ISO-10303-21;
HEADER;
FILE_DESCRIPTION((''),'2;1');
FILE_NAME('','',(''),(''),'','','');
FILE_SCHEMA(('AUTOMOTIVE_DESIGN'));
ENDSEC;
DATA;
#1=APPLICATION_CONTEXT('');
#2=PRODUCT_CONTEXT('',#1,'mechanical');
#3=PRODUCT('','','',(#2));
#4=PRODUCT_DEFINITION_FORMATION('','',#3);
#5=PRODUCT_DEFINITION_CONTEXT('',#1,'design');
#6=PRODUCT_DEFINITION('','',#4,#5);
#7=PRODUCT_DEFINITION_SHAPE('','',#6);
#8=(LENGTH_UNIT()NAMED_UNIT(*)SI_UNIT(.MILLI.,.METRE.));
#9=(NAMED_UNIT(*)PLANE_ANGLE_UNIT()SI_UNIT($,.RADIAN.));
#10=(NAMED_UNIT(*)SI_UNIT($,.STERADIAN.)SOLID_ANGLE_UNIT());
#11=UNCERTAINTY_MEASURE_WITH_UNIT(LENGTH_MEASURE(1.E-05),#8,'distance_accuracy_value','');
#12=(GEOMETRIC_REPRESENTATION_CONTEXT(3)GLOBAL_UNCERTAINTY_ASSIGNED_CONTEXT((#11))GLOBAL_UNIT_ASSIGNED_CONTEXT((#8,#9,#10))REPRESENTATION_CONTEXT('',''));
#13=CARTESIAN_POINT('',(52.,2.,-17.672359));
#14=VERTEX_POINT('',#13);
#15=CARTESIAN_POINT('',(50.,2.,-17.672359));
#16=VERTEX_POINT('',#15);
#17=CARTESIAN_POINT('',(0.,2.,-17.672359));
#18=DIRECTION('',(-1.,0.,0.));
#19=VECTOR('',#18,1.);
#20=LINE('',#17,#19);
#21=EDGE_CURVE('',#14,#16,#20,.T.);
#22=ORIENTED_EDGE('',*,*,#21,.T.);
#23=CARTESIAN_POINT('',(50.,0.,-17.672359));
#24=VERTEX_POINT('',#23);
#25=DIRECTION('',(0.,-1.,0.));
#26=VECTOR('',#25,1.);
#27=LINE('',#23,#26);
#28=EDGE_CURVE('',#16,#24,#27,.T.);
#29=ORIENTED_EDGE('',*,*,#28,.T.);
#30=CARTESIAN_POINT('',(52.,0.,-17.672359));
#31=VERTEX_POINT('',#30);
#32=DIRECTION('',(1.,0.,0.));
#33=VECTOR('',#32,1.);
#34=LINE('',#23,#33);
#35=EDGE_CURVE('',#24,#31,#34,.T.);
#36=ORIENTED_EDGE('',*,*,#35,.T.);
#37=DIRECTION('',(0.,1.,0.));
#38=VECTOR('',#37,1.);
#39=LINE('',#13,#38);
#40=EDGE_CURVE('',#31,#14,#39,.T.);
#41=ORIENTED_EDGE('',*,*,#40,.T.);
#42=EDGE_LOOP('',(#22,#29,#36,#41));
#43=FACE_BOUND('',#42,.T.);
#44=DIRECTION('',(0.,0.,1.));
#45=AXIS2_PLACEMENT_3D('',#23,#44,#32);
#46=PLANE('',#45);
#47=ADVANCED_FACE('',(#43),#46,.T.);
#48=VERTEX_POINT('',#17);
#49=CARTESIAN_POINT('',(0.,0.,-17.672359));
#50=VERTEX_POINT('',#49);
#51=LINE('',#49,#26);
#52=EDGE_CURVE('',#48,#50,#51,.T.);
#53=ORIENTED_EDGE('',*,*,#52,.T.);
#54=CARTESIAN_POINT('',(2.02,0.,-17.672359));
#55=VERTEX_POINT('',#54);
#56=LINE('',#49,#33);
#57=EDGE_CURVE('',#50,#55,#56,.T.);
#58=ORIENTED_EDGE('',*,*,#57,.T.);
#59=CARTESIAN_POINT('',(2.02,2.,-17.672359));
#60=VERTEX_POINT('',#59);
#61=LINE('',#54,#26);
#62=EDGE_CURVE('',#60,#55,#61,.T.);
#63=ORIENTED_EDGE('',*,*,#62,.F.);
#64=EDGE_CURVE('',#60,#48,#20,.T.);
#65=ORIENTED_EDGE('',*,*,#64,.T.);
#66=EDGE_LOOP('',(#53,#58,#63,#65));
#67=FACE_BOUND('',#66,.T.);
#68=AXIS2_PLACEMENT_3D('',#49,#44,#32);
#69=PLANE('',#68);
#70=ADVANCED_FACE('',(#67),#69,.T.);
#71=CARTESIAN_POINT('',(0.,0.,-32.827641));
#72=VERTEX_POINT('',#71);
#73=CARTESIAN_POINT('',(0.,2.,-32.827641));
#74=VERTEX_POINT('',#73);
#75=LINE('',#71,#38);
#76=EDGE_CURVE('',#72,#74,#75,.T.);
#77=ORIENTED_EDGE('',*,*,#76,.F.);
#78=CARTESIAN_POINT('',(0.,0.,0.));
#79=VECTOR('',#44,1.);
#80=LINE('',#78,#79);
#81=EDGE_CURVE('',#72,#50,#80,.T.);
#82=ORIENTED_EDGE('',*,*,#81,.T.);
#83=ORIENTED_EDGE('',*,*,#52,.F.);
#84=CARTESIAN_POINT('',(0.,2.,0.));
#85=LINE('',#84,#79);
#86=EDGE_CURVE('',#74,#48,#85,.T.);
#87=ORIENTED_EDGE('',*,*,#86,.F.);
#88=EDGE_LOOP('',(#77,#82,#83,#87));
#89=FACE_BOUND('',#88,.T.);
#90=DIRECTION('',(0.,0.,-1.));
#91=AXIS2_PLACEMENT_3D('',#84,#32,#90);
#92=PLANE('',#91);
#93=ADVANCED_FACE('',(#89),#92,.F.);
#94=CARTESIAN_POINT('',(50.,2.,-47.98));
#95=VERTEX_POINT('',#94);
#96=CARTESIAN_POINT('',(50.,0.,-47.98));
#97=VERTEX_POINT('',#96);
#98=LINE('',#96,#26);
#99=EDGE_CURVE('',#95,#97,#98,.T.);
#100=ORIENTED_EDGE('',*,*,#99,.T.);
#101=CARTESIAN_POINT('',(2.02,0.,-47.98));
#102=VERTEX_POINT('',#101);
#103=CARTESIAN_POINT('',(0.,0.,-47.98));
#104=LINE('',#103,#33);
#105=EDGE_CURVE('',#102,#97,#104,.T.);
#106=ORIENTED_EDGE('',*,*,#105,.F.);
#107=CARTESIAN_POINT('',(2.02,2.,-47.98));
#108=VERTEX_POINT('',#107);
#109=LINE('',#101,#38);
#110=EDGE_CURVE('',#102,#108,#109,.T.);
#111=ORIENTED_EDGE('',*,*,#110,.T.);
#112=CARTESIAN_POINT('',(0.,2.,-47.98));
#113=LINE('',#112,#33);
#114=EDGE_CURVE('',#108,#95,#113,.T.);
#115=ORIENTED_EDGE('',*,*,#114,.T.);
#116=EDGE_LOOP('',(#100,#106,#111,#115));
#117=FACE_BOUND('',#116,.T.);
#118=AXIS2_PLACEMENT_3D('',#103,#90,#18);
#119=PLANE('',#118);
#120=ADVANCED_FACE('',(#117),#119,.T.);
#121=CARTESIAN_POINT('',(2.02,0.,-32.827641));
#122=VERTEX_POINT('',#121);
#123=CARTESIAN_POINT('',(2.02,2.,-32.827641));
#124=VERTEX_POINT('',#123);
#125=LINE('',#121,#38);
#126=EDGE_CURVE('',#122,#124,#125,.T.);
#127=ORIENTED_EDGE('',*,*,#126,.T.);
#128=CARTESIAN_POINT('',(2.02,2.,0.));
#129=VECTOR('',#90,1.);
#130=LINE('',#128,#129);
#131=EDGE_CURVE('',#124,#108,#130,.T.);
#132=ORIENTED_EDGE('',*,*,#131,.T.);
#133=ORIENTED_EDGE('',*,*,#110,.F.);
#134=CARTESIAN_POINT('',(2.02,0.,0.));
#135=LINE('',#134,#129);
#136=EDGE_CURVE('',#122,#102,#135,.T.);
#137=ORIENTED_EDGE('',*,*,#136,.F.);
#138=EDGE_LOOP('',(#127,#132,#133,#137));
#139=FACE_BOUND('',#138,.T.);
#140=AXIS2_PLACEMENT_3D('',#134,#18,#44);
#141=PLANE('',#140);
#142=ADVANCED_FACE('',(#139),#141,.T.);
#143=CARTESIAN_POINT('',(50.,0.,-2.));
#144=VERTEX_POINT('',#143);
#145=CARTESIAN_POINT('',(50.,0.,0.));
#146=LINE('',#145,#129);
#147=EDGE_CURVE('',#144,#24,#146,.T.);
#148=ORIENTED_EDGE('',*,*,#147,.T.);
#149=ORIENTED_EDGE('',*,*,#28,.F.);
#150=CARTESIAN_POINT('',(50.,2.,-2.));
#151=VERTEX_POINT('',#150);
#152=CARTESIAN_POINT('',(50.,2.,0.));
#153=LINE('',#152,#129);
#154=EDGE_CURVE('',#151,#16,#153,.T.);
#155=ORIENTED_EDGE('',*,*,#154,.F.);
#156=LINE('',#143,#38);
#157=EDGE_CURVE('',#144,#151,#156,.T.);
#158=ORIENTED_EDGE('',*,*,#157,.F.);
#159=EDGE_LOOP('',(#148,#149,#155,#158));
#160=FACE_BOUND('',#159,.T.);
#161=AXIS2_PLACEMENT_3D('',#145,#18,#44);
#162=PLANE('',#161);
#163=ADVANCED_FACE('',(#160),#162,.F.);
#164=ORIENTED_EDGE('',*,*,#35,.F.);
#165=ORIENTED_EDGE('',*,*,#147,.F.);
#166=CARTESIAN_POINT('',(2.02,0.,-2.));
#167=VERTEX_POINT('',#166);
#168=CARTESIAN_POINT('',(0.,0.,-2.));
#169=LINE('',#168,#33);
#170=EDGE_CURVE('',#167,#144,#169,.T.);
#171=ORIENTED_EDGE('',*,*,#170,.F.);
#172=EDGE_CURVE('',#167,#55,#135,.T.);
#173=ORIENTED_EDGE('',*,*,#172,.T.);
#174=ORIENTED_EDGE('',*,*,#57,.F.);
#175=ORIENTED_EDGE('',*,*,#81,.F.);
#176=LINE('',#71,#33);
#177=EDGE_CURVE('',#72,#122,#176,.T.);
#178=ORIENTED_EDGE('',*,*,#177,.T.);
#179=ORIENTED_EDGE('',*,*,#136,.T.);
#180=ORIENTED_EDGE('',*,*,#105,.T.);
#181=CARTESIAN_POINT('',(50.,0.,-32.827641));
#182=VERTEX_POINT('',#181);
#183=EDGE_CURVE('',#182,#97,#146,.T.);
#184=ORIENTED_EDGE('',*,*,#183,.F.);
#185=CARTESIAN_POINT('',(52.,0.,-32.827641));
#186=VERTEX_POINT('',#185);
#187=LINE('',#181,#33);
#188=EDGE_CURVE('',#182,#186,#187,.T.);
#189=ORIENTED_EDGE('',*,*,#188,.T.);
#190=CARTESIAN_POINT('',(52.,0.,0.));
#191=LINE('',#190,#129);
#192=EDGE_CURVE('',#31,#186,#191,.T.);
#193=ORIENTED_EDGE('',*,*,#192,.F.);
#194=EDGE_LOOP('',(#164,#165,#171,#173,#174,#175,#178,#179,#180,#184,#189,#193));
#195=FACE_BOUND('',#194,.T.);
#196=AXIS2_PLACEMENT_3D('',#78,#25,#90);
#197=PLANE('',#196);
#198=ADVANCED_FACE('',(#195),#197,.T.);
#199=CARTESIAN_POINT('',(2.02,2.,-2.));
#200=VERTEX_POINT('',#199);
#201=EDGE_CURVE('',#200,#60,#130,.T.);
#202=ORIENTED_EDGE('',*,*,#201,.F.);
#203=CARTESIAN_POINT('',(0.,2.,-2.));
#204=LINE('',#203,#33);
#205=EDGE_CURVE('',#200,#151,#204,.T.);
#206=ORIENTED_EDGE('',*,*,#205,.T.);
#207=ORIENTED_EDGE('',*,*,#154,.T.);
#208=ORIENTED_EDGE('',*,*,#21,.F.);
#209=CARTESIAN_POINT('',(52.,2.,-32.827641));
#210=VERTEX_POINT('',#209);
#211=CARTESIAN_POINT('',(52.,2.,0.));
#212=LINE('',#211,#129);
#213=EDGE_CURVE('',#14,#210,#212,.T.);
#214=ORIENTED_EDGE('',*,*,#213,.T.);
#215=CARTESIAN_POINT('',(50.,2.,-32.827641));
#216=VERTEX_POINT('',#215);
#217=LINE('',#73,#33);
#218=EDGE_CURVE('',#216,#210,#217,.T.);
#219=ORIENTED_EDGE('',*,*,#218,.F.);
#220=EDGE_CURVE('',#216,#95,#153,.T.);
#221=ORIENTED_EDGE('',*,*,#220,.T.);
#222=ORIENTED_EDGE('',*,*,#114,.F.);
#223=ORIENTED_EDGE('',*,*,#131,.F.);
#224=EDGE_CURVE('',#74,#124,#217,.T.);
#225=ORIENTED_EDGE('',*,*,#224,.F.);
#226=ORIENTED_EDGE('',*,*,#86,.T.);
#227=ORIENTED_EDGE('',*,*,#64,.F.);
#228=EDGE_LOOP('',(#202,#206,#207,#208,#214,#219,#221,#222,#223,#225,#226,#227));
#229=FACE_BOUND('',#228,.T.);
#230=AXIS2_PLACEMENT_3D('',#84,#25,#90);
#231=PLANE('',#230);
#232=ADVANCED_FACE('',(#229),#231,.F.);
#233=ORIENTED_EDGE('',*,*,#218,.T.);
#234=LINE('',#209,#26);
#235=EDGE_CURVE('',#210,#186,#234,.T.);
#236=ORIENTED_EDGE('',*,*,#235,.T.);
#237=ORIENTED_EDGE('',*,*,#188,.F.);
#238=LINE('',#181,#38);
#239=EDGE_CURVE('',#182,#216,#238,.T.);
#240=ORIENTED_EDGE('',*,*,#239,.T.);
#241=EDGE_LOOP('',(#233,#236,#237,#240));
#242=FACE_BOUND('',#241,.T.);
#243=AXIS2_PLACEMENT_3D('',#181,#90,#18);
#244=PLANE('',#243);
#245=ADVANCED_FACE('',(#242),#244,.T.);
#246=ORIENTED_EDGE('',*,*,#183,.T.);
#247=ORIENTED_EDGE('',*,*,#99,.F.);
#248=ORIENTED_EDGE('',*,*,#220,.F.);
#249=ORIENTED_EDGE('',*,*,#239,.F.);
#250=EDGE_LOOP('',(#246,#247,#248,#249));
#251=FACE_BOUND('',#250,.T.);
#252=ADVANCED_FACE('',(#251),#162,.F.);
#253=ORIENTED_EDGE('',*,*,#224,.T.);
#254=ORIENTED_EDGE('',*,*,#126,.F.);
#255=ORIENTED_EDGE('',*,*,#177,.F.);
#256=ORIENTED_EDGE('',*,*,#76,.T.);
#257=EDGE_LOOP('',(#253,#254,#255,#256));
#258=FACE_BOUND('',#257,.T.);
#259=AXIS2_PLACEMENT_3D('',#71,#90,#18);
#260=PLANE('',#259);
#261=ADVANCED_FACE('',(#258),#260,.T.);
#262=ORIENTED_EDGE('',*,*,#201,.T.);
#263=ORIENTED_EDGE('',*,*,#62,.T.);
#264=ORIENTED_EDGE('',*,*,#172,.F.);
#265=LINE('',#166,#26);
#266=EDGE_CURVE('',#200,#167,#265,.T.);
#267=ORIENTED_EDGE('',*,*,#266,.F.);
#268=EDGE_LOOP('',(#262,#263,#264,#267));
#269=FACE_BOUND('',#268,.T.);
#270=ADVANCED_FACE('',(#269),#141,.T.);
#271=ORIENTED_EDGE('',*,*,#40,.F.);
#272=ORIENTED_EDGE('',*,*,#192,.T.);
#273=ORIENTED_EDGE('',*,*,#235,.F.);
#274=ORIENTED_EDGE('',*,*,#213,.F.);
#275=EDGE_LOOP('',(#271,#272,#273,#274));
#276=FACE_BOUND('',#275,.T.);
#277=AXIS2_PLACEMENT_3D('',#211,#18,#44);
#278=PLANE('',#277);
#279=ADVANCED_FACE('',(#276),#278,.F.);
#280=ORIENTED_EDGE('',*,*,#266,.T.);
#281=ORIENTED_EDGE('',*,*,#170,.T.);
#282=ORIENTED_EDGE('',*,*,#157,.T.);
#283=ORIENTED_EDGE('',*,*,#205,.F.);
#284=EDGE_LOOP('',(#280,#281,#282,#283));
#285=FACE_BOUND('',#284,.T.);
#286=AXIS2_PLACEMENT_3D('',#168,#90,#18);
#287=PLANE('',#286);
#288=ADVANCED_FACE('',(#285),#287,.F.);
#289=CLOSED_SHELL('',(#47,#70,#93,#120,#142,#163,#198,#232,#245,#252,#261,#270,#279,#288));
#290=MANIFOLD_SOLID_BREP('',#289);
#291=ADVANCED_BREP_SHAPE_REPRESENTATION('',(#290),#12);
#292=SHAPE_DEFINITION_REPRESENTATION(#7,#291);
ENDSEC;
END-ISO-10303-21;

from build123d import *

# Parameters (mm, degrees)
ESQUISSE1_W              = 52
ESQUISSE1_H              = 50
BOSS_EXTRU_1_DEPTH       = 2
EMPREINTE1_START         = -50
EMPREINTE1_OUTLINE_W     = 2.02
EMPREINTE1_OUTLINE_H     = 2
EMPREINTE1_OUTLINE_W_2   = 49.9598
EMPREINTE1_DEPTH         = 2.02
EMPREINTE1_START_2       = -2
EMPREINTE1_2_OUTLINE_W   = 2.02
EMPREINTE1_2_OUTLINE_H   = 2
EMPREINTE1_2_OUTLINE_W_2 = 49.9598
EMPREINTE1_2_DEPTH       = 2
EMPREINTE1_START_3       = -17.67235879
EMPREINTE1_3_OUTLINE_W   = 2.02
EMPREINTE1_3_OUTLINE_H   = 2
EMPREINTE1_3_OUTLINE_W_2 = 2
EMPREINTE1_3_DEPTH       = 15.67235879
EMPREINTE1_START_4       = -47.98
EMPREINTE1_4_OUTLINE_W   = 2.02
EMPREINTE1_4_OUTLINE_H   = 2
EMPREINTE1_4_OUTLINE_W_2 = 2
EMPREINTE1_4_DEPTH       = 15.15235879
ESQUISSE2_W              = 9.61940452
ESQUISSE2_H              = 3.700848348
ESQUISSE2_W_2            = 14.786584651
ESQUISSE2_H_2            = 4.070824207
ENL_V_MAT_EXTRU_1_DEPTH  = 2


# Read off the part's stored shape, not the designer's step: Empreinte1
with BuildPart() as part:
    # Esquisse1 → Boss.-Extru.1 (new body)
    with BuildSketch(Plane(origin=(0, 0, 0), x_dir=(1, 0, 0), z_dir=(0, 1, 0))):
        with Locations((26, 25)):
            Rectangle(ESQUISSE1_W, ESQUISSE1_H)
    extrude(amount=BOSS_EXTRU_1_DEPTH)

    # Empreinte1 outline → Empreinte1 (cut)
    with BuildSketch(Plane.XY.offset(EMPREINTE1_START)):
        with Locations((1.01, 1)):
            Rectangle(EMPREINTE1_OUTLINE_W, EMPREINTE1_OUTLINE_H)
        with Locations((27.0201, 1)):
            Rectangle(EMPREINTE1_OUTLINE_W_2, EMPREINTE1_OUTLINE_H)
    extrude(amount=EMPREINTE1_DEPTH, mode=Mode.SUBTRACT)

    # Empreinte1 2 outline → Empreinte1 2 (cut)
    with BuildSketch(Plane.XY.offset(EMPREINTE1_START_2)):
        with Locations((1.01, 1)):
            Rectangle(EMPREINTE1_2_OUTLINE_W, EMPREINTE1_2_OUTLINE_H)
        with Locations((27.0201, 1)):
            Rectangle(EMPREINTE1_2_OUTLINE_W_2, EMPREINTE1_2_OUTLINE_H)
    extrude(amount=EMPREINTE1_2_DEPTH, mode=Mode.SUBTRACT)

    # Empreinte1 3 outline → Empreinte1 3 (cut)
    with BuildSketch(Plane.XY.offset(EMPREINTE1_START_3)):
        with Locations((1.01, 1)):
            Rectangle(EMPREINTE1_3_OUTLINE_W, EMPREINTE1_3_OUTLINE_H)
        with Locations((51, 1)):
            Rectangle(EMPREINTE1_3_OUTLINE_W_2, EMPREINTE1_3_OUTLINE_H)
    extrude(amount=EMPREINTE1_3_DEPTH, mode=Mode.SUBTRACT)

    # Empreinte1 4 outline → Empreinte1 4 (cut)
    with BuildSketch(Plane.XY.offset(EMPREINTE1_START_4)):
        with Locations((1.01, 1)):
            Rectangle(EMPREINTE1_4_OUTLINE_W, EMPREINTE1_4_OUTLINE_H)
        with Locations((51, 1)):
            Rectangle(EMPREINTE1_4_OUTLINE_W_2, EMPREINTE1_4_OUTLINE_H)
    extrude(amount=EMPREINTE1_4_DEPTH, mode=Mode.SUBTRACT)

    # Esquisse2 → Enlèv. mat.-Extru.1 (cut)
    with BuildSketch(Plane(origin=(0, 2, 0), x_dir=(1, 0, 0), z_dir=(0, 1, 0))):
        with Locations((1.626508817, 49.830424174)):
            Rectangle(ESQUISSE2_W, ESQUISSE2_H)
        with Locations((5.120042554, -0.035412104)):
            Rectangle(ESQUISSE2_W_2, ESQUISSE2_H_2)
    extrude(amount=-ENL_V_MAT_EXTRU_1_DEPTH, mode=Mode.SUBTRACT)


solid = part.part
